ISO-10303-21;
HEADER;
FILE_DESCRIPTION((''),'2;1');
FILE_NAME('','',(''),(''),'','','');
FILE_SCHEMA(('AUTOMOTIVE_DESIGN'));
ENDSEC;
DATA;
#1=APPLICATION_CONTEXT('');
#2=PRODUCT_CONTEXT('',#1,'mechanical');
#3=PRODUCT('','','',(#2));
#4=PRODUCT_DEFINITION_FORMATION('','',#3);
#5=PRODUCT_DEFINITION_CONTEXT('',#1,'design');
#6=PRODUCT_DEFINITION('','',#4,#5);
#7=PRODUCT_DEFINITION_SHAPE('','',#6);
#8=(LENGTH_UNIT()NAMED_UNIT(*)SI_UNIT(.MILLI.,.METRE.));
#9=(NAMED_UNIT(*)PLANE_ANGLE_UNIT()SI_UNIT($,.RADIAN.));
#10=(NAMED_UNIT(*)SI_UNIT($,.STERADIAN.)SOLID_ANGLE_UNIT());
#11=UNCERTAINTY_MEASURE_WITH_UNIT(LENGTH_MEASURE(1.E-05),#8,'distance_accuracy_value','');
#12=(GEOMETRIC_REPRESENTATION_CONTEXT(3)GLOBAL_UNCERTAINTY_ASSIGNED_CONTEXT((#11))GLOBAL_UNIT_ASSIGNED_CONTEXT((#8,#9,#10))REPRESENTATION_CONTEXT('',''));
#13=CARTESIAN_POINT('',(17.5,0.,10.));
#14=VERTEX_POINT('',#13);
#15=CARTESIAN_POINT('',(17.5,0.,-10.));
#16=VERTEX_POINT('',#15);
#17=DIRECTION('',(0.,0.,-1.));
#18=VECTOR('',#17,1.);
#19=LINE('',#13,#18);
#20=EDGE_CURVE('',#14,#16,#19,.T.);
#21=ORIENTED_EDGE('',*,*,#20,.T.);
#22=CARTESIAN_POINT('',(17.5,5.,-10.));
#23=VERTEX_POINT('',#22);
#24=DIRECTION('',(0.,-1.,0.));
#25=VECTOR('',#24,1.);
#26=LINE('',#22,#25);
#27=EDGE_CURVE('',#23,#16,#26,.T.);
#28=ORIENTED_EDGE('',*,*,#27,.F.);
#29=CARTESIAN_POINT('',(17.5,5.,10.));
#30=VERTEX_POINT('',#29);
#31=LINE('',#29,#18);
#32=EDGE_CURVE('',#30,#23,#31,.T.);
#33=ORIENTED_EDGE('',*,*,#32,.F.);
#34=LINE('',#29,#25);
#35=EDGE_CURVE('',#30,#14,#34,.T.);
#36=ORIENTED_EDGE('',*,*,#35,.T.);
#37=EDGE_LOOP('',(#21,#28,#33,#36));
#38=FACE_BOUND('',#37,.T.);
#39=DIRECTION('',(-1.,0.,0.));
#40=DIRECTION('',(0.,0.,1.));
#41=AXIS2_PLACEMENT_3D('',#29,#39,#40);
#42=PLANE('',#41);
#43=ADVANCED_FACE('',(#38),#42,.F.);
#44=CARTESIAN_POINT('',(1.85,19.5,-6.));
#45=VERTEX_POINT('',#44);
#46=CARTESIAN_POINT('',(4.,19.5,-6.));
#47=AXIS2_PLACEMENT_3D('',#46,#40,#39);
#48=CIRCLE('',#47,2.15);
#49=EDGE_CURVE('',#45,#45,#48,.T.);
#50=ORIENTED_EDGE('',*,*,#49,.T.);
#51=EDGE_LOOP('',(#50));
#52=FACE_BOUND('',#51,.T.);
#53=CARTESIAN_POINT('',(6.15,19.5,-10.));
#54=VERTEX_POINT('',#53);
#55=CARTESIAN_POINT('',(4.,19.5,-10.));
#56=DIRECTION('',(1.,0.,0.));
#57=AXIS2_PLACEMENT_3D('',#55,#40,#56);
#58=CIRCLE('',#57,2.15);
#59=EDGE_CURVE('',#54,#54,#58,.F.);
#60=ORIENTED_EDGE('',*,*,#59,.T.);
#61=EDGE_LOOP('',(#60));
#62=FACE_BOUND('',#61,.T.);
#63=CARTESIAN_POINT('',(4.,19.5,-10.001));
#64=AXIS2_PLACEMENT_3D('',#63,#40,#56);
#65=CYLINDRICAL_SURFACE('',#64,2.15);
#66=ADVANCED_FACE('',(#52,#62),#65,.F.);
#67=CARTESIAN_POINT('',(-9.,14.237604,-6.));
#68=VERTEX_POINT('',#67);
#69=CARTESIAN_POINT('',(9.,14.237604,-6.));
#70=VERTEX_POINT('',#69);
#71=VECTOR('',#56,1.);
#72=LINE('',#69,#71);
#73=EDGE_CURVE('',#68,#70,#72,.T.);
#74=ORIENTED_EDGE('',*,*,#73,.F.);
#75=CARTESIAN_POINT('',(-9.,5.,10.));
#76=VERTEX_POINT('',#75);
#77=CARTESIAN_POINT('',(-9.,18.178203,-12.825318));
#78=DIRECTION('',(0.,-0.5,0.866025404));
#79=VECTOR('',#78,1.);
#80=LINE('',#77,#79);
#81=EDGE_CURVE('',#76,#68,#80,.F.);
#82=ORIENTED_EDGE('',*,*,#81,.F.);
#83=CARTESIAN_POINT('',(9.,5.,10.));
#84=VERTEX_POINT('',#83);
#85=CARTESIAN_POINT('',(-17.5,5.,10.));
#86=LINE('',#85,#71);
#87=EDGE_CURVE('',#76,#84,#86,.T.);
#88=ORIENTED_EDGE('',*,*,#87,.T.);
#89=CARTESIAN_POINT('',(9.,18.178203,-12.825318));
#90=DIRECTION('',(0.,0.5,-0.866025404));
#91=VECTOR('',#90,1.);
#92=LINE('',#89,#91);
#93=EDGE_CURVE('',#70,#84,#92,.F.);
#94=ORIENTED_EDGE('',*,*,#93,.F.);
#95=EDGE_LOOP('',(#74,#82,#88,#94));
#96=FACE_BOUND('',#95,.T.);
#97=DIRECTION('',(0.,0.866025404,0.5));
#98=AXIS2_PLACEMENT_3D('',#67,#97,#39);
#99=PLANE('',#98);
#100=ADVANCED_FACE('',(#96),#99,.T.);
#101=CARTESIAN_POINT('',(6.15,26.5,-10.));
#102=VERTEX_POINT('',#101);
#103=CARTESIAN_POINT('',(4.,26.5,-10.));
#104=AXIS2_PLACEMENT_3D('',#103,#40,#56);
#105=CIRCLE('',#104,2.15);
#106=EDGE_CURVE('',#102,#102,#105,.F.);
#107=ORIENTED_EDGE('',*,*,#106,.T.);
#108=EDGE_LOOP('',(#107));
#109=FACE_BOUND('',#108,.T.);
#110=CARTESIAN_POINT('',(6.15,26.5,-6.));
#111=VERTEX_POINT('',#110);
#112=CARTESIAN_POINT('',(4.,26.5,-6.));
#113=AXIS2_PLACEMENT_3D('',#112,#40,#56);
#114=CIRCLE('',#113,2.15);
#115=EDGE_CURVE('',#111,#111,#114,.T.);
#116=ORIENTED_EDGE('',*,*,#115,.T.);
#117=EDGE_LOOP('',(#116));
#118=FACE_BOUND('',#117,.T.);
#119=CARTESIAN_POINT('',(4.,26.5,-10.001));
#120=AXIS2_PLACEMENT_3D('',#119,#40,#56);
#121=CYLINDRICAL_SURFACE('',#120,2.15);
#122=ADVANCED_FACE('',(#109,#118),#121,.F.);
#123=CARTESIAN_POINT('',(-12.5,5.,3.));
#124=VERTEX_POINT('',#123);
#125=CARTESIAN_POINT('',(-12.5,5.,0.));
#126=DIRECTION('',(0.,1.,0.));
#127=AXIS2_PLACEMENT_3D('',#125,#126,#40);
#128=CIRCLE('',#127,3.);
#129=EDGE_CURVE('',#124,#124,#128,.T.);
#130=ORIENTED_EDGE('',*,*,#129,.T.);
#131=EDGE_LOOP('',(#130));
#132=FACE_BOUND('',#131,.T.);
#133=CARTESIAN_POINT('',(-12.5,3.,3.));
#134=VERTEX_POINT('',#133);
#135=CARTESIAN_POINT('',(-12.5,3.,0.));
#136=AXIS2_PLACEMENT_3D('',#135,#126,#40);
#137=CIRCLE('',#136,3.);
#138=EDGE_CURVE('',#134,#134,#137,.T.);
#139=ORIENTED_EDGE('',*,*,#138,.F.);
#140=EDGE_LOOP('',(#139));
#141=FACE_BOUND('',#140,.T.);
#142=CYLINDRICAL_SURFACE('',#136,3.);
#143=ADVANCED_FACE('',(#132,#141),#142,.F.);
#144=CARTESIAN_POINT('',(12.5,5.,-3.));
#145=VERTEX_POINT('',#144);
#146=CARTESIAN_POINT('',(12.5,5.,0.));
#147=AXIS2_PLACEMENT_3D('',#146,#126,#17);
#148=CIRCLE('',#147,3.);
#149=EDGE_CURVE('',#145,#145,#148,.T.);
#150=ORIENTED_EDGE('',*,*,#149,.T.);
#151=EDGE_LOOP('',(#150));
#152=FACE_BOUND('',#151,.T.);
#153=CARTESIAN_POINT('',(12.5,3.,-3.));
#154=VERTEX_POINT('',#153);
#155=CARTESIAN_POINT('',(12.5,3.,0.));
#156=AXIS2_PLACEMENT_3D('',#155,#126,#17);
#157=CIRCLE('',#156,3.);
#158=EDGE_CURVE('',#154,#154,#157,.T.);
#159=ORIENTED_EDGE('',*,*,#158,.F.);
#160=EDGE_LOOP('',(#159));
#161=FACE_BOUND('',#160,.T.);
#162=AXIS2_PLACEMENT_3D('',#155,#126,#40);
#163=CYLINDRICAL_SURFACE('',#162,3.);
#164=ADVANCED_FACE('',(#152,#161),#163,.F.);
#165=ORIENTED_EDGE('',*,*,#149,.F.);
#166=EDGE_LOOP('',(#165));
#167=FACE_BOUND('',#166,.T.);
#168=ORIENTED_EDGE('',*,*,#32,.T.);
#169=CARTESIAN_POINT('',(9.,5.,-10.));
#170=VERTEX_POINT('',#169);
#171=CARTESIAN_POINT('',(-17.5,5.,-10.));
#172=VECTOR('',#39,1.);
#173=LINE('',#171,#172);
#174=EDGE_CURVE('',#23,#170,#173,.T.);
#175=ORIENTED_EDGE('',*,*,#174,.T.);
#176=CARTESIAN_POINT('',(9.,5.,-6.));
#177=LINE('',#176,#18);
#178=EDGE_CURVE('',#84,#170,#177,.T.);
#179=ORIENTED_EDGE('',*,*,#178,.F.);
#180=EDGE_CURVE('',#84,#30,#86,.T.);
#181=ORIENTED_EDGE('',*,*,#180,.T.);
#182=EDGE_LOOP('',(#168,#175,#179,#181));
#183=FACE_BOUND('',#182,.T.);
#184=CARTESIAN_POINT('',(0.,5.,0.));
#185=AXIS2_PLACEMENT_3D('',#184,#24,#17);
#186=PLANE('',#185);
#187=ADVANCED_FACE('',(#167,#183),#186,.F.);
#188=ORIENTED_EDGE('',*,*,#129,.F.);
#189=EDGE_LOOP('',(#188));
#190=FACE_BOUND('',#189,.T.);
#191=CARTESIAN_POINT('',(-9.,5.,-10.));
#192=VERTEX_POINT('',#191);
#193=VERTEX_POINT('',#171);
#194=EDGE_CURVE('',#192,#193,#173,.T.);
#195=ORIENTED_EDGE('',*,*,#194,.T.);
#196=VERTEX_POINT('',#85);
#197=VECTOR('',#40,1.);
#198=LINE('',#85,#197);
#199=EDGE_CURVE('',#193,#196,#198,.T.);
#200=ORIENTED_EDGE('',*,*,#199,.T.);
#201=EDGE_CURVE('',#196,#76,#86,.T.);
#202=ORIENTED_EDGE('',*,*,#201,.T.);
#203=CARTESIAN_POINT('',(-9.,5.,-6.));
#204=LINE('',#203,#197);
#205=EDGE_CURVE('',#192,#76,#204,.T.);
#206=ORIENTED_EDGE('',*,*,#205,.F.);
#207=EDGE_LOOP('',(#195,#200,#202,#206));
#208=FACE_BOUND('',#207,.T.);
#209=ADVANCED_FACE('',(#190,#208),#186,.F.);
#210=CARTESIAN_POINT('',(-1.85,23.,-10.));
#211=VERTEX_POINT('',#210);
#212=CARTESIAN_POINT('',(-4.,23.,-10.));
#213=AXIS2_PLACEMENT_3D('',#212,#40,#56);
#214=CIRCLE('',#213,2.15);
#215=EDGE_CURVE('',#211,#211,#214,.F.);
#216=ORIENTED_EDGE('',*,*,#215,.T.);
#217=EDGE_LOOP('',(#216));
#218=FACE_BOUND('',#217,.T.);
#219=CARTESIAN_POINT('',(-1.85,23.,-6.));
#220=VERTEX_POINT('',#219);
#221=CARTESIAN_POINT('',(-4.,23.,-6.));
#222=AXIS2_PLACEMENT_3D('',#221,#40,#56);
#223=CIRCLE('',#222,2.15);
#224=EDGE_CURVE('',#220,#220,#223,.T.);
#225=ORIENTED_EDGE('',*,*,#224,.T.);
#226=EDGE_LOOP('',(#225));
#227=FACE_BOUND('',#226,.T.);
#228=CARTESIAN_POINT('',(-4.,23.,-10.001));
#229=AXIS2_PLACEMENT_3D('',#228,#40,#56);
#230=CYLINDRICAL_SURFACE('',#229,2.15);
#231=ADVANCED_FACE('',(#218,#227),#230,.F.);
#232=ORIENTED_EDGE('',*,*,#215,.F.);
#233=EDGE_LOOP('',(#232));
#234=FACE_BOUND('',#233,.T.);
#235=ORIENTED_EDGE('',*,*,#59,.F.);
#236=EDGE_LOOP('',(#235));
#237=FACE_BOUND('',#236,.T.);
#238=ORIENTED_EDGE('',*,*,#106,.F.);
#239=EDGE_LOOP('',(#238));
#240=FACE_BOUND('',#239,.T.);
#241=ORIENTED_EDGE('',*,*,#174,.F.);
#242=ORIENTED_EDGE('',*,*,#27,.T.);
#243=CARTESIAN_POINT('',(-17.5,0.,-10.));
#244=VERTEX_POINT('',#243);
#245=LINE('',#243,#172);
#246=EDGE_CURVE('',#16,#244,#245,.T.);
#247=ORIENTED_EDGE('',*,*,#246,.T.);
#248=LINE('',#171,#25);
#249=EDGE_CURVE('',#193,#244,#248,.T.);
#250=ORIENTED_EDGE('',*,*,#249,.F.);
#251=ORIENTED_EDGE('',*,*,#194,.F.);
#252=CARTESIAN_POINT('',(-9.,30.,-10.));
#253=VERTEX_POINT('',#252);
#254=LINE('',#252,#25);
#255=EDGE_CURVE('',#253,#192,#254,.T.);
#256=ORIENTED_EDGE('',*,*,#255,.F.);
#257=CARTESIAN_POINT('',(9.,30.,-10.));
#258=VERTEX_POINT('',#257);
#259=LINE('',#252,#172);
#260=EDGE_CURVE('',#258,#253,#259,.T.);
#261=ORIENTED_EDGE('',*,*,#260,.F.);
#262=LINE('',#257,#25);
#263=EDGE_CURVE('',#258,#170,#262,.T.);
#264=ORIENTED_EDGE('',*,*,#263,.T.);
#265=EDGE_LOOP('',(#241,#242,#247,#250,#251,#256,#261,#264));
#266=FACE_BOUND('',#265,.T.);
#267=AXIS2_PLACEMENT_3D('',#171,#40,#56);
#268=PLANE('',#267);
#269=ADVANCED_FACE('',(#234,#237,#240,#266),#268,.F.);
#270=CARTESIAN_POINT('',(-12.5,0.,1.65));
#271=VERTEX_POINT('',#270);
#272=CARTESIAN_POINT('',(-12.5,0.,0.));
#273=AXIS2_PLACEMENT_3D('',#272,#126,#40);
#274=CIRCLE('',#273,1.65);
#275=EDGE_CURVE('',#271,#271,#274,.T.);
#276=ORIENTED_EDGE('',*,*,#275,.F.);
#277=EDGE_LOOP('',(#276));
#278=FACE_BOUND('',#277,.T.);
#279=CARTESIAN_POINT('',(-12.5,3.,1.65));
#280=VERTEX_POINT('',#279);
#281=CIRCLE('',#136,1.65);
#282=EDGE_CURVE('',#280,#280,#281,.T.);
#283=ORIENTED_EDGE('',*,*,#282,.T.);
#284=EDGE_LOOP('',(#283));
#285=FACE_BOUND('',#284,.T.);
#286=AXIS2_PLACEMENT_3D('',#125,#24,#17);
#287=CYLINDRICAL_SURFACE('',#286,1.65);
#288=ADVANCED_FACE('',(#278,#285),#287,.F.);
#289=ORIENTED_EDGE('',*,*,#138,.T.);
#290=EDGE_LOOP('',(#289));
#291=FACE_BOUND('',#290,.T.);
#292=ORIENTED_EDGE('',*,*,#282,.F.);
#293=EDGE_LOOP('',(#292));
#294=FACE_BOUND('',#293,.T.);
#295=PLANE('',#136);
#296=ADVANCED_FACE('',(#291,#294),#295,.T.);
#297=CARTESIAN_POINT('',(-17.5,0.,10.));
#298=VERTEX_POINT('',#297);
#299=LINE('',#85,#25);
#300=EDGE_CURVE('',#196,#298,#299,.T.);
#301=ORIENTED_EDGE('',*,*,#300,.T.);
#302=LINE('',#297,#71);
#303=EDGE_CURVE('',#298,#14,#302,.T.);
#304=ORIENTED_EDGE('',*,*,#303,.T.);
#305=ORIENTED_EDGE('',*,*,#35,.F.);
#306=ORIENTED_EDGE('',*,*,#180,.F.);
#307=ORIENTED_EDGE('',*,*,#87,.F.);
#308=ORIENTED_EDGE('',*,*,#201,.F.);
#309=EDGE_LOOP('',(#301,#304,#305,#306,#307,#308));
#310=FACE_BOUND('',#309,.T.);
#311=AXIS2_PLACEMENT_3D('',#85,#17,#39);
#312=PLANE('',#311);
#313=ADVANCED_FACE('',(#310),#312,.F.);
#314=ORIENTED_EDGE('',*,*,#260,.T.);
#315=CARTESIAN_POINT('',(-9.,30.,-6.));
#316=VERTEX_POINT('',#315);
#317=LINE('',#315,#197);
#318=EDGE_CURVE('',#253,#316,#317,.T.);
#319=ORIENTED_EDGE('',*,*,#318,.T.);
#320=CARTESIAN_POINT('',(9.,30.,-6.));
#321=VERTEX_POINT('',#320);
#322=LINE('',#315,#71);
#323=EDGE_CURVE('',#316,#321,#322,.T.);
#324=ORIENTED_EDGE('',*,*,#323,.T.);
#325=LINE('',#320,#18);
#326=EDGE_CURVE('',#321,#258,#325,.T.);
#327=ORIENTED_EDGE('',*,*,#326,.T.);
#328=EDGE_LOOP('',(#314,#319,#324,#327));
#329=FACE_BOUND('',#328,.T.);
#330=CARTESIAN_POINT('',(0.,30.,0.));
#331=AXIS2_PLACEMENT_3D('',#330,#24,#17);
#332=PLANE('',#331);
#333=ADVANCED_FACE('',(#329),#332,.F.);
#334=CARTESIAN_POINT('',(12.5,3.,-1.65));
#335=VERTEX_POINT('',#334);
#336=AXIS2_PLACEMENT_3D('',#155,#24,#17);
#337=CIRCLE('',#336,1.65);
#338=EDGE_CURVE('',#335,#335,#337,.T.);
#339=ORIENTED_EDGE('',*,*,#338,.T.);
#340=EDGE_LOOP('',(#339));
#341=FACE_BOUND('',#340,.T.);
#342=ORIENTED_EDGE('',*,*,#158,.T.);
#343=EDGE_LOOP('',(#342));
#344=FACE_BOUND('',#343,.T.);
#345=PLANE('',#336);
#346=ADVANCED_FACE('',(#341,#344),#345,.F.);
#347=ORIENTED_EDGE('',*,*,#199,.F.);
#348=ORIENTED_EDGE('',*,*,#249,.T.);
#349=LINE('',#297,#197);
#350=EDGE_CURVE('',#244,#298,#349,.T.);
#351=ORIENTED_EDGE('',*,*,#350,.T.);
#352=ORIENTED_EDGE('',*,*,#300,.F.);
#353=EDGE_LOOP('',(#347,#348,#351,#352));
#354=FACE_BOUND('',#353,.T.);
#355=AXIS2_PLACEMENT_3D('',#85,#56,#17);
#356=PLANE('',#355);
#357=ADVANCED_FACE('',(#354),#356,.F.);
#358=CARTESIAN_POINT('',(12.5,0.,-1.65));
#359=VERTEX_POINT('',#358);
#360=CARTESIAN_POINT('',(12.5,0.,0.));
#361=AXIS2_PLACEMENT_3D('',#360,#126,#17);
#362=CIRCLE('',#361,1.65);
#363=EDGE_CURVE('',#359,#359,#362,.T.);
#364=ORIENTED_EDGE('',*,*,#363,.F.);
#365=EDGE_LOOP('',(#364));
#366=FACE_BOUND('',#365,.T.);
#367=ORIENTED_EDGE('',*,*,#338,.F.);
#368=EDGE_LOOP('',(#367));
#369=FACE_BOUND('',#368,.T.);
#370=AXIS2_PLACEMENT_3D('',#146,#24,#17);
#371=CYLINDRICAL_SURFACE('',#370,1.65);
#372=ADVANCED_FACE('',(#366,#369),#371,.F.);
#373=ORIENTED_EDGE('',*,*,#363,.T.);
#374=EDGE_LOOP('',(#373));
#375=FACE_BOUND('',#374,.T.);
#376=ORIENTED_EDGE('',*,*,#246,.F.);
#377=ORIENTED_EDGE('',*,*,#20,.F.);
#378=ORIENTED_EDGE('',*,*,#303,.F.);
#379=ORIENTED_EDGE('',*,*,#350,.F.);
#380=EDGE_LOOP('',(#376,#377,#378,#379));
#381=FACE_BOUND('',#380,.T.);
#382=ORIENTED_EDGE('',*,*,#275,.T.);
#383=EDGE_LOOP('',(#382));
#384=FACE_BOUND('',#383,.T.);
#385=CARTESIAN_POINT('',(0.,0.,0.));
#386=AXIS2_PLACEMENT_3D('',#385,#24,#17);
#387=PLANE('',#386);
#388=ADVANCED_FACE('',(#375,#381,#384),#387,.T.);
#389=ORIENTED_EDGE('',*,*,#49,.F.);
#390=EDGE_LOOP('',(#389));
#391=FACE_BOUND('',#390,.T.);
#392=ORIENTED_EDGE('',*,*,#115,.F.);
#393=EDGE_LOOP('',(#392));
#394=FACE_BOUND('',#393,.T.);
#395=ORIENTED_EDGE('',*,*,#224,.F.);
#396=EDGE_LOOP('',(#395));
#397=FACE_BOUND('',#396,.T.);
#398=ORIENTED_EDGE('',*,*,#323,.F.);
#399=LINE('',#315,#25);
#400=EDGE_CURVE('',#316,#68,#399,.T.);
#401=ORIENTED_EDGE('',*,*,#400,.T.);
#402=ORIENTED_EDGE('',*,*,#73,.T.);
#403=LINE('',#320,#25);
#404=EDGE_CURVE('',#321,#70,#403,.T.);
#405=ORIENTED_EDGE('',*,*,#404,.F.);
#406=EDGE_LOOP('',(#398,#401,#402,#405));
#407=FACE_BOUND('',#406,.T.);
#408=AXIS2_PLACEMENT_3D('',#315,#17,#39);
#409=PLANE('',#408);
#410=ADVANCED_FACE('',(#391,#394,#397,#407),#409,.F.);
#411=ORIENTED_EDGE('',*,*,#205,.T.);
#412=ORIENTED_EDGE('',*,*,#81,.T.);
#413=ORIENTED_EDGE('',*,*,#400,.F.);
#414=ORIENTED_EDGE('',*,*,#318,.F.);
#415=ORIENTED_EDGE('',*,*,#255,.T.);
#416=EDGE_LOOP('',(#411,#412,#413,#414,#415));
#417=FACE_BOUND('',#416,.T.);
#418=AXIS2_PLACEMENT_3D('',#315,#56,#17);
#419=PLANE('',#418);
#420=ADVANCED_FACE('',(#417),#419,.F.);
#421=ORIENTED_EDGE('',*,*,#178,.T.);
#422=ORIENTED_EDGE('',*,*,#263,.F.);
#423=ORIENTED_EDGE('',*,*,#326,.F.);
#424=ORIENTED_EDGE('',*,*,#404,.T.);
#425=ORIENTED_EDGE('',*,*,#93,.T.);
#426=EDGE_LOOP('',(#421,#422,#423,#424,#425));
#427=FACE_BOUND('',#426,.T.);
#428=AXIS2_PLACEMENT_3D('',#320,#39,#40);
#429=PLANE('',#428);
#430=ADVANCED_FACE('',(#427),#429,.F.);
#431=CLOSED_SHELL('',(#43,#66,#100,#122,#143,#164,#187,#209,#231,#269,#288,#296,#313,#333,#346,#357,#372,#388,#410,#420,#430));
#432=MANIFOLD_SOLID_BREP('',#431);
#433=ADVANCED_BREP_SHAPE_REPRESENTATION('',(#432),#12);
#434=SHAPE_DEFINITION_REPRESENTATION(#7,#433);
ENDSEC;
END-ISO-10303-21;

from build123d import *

# Parameters (mm, degrees)
SKETCH1_W           = 35
SKETCH1_H           = 20
SKETCH1_R           = 1.65
BOSS_EXTRUDE1_DEPTH = 5
SKETCH3_W           = 18
SKETCH3_H           = 4
BOSS_EXTRUDE2_DEPTH = 25
CUT_EXTRUDE1_REACH  = 40.239
SKETCH4_R           = 2.15
SKETCH5_R           = 3
CUT_EXTRUDE2_DEPTH  = 2
CHAMFER1_SIZE2      = 9.237604307
CHAMFER1_SIZE       = 16


with BuildPart() as part:
    # Sketch1 → Boss-Extrude1 (new body)
    with BuildSketch(Plane(origin=(0, 0, 0), x_dir=(1, 0, 0), z_dir=(0, 1, 0))):
        Rectangle(SKETCH1_W, SKETCH1_H)
        with Locations(Location((-12.5, 0, 0), (0, 0, 270))):
            Circle(SKETCH1_R, mode=Mode.SUBTRACT)
        with Locations(Location((12.5, 0, 0), (0, 0, 90))):
            Circle(SKETCH1_R, mode=Mode.SUBTRACT)
    extrude(amount=BOSS_EXTRUDE1_DEPTH)

    # Sketch3 → Boss-Extrude2 (add)
    with BuildSketch(Plane(origin=(0, 5, 0), x_dir=(1, 0, 0), z_dir=(0, 1, 0))):
        with Locations((0, 8)):
            Rectangle(SKETCH3_W, SKETCH3_H)
    extrude(amount=BOSS_EXTRUDE2_DEPTH)

    # Sketch4 → Cut-Extrude1 (cut, up to next)
    with BuildSketch(Plane.XY.offset(-6), mode=Mode.PRIVATE) as cut_extrude1_sk1:
        with Locations((-4, 23)):
            Circle(SKETCH4_R)
    cut_extrude1_tool1 = extrude(cut_extrude1_sk1.sketch, amount=-CUT_EXTRUDE1_REACH, mode=Mode.PRIVATE) & part.part
    # Sketch4 → Cut-Extrude1 (cut, up to next)
    with BuildSketch(Plane.XY.offset(-6), mode=Mode.PRIVATE) as cut_extrude1_sk2:
        with Locations((4, 26.5)):
            Circle(SKETCH4_R)
    cut_extrude1_tool2 = extrude(cut_extrude1_sk2.sketch, amount=-CUT_EXTRUDE1_REACH, mode=Mode.PRIVATE) & part.part
    # Sketch4 → Cut-Extrude1 (cut, up to next)
    with BuildSketch(Plane.XY.offset(-6), mode=Mode.PRIVATE) as cut_extrude1_sk3:
        with Locations((4, 19.5)):
            Circle(SKETCH4_R)
    cut_extrude1_tool3 = extrude(cut_extrude1_sk3.sketch, amount=-CUT_EXTRUDE1_REACH, mode=Mode.PRIVATE) & part.part
    add(cut_extrude1_tool1.solids().sort_by_distance((-4, 23, -6))[0], mode=Mode.SUBTRACT)
    add(cut_extrude1_tool2.solids().sort_by_distance((4, 26.5, -6))[0], mode=Mode.SUBTRACT)
    add(cut_extrude1_tool3.solids().sort_by_distance((4, 19.5, -6))[0], mode=Mode.SUBTRACT)

    # Sketch5 → Cut-Extrude2 (cut)
    with BuildSketch(Plane(origin=(0, 5, 0), x_dir=(1, 0, 0), z_dir=(0, 1, 0))):
        with Locations(Location((-12.5, 0, 0), (0, 0, 270))):
            Circle(SKETCH5_R)
        with Locations(Location((12.5, 0, 0), (0, 0, 90))):
            Circle(SKETCH5_R)
    extrude(amount=-CUT_EXTRUDE2_DEPTH, mode=Mode.SUBTRACT)

    # Chamfer1
    chamfer1_edges = [part.edges().sort_by_distance(p)[0] for p in [
        (0, 5, -6),
    ]]
    chamfer1_side = [part.faces().sort_by_distance(p)[0] for p in [
        (0, 5, -5.815247914),
    ]]
    chamfer(chamfer1_edges, length=CHAMFER1_SIZE - 0.0001, length2=CHAMFER1_SIZE2 - 0.0001, reference=chamfer1_side[0])  # a hair under: the kernel refuses the full size


solid = part.part
